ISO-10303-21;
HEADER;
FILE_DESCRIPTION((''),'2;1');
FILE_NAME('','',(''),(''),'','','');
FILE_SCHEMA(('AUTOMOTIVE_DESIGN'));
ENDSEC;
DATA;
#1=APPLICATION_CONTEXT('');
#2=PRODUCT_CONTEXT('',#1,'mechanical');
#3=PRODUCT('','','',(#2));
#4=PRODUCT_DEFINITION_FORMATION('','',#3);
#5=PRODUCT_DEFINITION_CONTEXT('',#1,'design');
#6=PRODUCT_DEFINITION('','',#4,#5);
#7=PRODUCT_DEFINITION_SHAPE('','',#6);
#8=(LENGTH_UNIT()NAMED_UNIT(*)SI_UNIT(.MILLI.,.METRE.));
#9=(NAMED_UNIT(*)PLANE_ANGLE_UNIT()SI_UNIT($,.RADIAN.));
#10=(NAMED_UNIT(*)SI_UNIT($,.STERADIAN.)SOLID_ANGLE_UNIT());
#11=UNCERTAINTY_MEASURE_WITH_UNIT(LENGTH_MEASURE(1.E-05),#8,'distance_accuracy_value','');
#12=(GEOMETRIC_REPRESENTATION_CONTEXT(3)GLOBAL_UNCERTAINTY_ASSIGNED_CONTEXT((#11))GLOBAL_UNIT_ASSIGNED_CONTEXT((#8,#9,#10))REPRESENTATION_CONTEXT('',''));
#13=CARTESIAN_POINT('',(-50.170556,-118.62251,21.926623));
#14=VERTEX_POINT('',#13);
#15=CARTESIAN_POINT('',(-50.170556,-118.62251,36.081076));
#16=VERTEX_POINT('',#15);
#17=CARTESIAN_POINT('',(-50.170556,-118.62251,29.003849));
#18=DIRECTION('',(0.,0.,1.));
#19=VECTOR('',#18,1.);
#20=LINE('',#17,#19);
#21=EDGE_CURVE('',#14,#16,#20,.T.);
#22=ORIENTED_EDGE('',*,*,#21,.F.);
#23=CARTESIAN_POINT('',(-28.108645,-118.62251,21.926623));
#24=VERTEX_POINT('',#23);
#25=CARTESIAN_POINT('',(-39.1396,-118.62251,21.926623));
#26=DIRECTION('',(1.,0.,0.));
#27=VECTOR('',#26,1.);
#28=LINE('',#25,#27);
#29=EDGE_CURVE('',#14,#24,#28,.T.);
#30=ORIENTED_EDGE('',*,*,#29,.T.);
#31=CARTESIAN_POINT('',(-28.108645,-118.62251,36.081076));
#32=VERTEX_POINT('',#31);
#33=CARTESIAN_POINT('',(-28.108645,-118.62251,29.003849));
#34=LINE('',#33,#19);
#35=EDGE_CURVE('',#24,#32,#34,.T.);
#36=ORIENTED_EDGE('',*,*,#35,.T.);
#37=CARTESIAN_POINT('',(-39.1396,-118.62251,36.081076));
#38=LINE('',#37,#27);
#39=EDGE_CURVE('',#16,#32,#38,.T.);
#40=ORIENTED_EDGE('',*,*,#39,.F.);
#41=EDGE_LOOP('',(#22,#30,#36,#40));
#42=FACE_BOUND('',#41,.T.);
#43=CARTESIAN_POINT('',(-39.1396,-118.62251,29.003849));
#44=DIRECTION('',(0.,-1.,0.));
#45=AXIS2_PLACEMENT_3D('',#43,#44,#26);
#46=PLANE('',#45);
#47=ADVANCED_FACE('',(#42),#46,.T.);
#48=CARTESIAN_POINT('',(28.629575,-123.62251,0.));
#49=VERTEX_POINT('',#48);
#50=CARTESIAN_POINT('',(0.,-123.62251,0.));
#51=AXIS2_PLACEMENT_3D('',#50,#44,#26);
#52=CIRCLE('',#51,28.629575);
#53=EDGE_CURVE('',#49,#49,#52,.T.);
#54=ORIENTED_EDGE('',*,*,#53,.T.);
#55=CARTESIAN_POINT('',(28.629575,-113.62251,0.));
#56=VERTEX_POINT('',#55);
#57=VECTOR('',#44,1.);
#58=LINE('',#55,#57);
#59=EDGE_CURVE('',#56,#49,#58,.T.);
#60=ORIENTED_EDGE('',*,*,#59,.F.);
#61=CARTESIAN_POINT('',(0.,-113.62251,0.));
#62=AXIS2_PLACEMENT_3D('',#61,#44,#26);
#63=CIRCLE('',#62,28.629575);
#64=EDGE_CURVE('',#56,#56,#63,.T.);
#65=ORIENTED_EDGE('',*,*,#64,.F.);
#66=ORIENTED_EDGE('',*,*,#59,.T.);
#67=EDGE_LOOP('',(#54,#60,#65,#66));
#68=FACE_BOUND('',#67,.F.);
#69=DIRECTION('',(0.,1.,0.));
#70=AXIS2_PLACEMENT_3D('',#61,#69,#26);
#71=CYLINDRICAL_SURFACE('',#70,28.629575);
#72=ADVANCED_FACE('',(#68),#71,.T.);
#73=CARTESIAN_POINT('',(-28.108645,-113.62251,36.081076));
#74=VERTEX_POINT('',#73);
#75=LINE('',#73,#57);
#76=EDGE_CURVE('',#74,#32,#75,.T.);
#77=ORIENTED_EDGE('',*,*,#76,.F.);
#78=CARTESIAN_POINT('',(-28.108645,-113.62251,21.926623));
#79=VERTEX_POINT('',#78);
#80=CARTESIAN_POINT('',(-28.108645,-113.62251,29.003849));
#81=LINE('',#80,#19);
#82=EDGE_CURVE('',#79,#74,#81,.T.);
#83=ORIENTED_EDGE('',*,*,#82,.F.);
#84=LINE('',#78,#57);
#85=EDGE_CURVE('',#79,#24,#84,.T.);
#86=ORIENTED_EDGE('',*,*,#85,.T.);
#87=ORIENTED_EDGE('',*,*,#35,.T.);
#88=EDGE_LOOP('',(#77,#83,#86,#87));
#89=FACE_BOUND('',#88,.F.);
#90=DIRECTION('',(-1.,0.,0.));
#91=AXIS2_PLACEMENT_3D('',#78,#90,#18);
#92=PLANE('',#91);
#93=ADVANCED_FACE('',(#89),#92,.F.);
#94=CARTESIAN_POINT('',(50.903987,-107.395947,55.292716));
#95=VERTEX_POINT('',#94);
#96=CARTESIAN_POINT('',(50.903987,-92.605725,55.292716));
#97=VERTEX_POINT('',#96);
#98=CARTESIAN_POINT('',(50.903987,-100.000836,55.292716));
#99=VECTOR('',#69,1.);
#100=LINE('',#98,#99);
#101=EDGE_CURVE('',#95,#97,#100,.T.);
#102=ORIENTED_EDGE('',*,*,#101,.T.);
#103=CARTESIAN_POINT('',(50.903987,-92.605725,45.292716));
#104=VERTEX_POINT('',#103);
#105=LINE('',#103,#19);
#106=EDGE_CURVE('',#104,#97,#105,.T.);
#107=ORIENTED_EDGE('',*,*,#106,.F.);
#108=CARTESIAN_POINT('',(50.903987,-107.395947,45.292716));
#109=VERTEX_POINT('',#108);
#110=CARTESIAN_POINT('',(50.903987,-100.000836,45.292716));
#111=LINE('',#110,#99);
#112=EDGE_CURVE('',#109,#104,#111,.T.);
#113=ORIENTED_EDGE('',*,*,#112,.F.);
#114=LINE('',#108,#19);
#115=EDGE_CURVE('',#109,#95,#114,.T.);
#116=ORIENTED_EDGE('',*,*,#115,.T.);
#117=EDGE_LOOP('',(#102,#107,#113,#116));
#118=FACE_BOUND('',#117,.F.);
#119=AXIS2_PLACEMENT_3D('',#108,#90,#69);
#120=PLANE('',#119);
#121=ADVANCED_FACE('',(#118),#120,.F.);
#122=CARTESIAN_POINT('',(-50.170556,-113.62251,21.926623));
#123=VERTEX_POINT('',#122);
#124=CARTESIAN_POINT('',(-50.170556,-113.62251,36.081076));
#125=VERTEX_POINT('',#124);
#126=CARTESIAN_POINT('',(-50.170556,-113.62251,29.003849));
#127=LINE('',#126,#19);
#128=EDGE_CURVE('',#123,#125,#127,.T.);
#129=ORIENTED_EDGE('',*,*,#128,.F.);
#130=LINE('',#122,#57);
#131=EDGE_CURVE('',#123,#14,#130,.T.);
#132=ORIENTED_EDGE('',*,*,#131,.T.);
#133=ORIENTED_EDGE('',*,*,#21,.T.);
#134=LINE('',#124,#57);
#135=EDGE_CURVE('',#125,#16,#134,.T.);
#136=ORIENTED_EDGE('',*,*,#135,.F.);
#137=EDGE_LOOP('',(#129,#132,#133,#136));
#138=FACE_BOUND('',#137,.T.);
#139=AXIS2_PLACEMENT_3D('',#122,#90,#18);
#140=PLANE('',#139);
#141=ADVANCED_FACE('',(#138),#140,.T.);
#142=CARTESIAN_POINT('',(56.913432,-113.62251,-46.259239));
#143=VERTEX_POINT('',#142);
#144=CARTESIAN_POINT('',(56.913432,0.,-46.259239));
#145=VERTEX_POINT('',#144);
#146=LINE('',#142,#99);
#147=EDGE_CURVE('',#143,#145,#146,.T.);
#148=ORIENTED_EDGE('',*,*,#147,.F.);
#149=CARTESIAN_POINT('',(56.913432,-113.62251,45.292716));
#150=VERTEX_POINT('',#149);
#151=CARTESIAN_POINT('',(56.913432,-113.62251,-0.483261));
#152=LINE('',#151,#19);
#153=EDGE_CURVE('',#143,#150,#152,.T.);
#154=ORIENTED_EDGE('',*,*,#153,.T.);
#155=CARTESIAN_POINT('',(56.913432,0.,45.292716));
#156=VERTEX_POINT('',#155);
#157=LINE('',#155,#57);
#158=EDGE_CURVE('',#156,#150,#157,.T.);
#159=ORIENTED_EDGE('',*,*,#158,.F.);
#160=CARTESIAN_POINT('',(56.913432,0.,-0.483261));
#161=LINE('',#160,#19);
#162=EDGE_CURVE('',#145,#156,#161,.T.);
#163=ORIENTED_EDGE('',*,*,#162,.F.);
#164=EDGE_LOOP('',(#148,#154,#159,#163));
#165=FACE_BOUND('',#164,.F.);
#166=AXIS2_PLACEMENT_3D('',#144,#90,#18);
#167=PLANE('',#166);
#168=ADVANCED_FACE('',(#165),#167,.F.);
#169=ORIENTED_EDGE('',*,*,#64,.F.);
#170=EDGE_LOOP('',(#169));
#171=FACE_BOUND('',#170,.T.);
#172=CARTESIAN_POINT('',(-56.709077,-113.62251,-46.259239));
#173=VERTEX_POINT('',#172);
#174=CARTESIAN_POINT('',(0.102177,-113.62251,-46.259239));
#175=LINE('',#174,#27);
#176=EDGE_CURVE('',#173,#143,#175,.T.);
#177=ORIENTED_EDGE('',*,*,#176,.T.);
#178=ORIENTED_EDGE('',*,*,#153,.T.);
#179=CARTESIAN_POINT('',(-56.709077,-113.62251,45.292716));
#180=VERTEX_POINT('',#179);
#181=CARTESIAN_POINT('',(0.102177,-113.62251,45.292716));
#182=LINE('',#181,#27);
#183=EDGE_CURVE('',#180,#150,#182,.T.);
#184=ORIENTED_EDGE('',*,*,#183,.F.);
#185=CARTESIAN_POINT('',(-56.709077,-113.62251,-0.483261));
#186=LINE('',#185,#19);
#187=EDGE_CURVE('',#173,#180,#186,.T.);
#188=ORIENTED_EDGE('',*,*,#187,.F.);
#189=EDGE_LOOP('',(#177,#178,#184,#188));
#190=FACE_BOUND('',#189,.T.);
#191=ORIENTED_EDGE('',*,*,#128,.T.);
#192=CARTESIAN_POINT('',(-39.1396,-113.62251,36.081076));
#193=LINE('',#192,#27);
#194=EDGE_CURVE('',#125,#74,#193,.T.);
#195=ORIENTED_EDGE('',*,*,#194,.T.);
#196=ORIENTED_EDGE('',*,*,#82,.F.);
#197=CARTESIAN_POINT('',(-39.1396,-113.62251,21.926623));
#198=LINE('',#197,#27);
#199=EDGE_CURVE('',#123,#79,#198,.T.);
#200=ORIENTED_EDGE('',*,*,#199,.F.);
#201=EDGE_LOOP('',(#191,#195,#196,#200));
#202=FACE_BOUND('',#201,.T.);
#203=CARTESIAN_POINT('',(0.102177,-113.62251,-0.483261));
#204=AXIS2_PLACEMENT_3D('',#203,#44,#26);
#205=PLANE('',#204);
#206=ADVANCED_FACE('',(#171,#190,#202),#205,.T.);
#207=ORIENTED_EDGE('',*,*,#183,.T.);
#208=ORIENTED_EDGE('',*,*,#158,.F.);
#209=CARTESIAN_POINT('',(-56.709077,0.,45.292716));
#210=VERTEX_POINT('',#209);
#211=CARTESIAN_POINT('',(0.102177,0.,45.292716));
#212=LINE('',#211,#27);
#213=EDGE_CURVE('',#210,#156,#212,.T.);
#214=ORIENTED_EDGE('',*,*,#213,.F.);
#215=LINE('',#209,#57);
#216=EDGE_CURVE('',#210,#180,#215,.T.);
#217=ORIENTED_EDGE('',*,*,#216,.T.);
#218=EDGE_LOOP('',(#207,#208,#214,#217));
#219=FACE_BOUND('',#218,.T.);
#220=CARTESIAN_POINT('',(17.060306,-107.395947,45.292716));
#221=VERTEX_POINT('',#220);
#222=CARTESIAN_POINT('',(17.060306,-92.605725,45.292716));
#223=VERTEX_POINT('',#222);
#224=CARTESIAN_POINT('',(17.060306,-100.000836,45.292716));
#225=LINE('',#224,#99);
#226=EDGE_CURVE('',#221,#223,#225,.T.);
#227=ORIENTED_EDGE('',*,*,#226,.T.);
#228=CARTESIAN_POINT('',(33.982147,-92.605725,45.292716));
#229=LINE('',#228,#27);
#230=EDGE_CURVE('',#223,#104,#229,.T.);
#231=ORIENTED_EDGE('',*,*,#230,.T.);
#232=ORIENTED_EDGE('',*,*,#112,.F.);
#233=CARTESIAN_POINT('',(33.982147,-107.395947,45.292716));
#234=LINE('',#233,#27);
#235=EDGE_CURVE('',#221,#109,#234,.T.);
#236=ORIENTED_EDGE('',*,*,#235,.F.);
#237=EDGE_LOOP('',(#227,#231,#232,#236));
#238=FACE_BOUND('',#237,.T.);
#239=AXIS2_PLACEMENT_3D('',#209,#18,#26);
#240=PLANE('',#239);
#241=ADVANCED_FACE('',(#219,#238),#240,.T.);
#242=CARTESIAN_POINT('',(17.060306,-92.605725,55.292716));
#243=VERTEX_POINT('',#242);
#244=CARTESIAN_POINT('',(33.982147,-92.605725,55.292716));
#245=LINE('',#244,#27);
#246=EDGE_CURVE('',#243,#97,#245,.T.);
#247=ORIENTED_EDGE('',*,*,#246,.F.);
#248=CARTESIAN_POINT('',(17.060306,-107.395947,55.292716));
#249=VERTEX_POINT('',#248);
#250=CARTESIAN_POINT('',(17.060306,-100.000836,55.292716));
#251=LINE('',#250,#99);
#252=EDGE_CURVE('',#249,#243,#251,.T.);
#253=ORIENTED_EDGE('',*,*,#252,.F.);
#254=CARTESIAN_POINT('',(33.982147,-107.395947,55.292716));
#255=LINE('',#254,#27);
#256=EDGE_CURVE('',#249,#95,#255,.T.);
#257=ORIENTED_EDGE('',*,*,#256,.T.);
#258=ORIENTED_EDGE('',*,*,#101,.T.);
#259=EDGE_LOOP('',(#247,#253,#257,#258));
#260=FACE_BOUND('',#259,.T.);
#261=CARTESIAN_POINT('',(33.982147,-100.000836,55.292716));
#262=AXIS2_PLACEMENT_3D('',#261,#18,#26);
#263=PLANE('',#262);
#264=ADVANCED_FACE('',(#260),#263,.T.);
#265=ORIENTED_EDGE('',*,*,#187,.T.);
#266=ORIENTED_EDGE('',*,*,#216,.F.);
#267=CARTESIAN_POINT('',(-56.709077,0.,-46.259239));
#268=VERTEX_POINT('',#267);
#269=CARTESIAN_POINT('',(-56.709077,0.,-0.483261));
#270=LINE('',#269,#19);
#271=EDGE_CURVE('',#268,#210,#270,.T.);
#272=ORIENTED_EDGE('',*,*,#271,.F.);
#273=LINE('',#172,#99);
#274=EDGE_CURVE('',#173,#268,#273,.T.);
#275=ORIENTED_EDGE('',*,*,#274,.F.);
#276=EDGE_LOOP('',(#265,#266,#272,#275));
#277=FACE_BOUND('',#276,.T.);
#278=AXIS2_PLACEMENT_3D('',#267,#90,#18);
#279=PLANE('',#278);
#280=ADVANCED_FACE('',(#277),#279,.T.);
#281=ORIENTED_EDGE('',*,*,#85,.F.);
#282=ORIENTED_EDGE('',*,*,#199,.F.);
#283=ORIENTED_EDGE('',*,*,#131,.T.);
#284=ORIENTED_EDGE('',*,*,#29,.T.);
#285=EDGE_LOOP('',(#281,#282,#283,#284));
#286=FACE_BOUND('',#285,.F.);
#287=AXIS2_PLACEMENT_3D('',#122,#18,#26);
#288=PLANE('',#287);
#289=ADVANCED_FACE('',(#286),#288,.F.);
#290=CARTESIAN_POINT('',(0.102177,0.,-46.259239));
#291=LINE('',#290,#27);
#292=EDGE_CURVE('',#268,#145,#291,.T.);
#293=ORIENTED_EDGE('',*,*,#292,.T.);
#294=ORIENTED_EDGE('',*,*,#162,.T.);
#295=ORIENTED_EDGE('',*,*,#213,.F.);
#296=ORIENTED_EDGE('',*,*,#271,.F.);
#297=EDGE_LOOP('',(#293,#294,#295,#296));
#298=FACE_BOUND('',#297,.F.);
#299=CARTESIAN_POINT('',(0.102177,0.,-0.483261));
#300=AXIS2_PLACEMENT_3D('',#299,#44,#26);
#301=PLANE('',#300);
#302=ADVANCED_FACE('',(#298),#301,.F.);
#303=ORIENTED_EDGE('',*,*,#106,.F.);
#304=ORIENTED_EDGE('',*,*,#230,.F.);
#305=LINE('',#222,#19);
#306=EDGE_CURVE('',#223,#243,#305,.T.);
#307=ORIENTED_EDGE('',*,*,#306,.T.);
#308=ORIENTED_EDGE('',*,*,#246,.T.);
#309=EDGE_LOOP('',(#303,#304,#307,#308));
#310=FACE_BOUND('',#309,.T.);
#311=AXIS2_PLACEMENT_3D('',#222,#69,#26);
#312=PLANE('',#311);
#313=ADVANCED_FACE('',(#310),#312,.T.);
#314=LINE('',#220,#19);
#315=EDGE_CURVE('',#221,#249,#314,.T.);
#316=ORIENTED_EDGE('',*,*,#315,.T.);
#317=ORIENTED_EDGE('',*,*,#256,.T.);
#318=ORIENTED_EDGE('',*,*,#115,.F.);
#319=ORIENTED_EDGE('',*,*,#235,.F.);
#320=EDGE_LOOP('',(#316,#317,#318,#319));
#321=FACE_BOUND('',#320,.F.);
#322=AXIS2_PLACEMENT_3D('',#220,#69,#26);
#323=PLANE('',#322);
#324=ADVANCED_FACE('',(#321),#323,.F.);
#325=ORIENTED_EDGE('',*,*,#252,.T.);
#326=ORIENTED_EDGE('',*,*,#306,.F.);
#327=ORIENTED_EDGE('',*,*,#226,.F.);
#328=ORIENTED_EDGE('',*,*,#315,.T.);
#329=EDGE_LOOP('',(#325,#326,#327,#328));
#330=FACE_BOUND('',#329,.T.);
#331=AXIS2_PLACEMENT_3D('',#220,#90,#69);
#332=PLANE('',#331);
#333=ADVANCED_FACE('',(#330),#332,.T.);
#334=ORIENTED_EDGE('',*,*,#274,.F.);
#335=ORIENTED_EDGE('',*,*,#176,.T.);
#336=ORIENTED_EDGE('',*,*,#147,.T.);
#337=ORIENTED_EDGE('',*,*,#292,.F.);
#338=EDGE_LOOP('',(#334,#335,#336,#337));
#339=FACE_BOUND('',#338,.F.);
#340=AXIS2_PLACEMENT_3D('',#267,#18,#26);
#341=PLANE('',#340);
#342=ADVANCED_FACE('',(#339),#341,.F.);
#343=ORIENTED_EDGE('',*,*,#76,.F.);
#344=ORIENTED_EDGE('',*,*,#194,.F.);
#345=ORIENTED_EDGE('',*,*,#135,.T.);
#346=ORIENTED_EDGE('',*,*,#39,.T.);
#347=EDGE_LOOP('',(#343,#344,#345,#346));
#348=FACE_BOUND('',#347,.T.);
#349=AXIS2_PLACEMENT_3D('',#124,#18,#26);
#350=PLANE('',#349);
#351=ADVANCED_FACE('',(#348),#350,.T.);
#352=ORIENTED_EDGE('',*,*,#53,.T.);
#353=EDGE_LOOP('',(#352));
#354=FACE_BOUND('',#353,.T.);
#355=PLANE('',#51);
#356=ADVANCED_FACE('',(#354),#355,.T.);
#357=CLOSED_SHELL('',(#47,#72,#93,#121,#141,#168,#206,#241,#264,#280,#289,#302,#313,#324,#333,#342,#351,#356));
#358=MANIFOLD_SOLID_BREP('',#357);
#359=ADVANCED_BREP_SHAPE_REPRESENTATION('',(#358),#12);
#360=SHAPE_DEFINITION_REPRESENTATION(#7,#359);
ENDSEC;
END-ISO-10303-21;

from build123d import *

# Parameters (mm, degrees)
F0_W      = 113.6225089431
F0_H      = 91.5519557893
F1_DEPTH  = 113.62251
F2_R      = 28.629575464
F3_DEPTH  = 10
F4_DEPTH  = 18
F7_W      = 33.8436812162
F7_H      = 14.7902220488
F8_DEPTH  = 10
F9_W      = 22.0619104803
F9_H      = 14.1544528306
F10_DEPTH = 5
F11_W     = 113.6225089431
F11_H     = 91.5519557893
F12_DEPTH = 60


# Not quite as in the source:
# - the program builds the solid bodies; features that only make, move or delete a surface that nothing else refers to are left out


with BuildPart() as f1:
    # F0 (on Front) → F1 (new body)
    with BuildSketch(Plane.XZ):
        with Locations((0.1021772623, -0.4832614213)):
            Rectangle(F0_W, F0_H)
    extrude(amount=F1_DEPTH)

    # F2 (on face) → F3 (join)
    with BuildSketch(Plane.XZ.offset(113.62251)):
        Circle(F2_R)
    extrude(amount=F3_DEPTH)

    # F4 (add): a face of the model
    f4_faces = [f1.faces().sort_by_distance(p)[0] for p in [
        (0, -123.62251, 0),
    ]]
    extrude(f4_faces, amount=-F4_DEPTH)

    # F7 (on face) → F8 (join)
    with BuildSketch(Plane.XY.offset(45.2927164733)):
        with Locations((33.9821465313, -100.0008359551)):
            Rectangle(F7_W, F7_H)
    extrude(amount=F8_DEPTH)

    # F9 (on face) → F10 (join)
    with BuildSketch(Plane.XZ.offset(113.62251)):
        with Locations((-39.1396004707, 29.0038492531)):
            Rectangle(F9_W, F9_H)
    extrude(amount=F10_DEPTH)

    # F11 (on face) → F12 (join)
    with BuildSketch(Plane(origin=(0, 0, 0), x_dir=(-1, 0, 0), z_dir=(0, 1, 0))):
        with Locations((-0.1021772623, -0.4832614213)):
            Rectangle(F11_W, F11_H)
    extrude(amount=-F12_DEPTH)


solid = f1.part
